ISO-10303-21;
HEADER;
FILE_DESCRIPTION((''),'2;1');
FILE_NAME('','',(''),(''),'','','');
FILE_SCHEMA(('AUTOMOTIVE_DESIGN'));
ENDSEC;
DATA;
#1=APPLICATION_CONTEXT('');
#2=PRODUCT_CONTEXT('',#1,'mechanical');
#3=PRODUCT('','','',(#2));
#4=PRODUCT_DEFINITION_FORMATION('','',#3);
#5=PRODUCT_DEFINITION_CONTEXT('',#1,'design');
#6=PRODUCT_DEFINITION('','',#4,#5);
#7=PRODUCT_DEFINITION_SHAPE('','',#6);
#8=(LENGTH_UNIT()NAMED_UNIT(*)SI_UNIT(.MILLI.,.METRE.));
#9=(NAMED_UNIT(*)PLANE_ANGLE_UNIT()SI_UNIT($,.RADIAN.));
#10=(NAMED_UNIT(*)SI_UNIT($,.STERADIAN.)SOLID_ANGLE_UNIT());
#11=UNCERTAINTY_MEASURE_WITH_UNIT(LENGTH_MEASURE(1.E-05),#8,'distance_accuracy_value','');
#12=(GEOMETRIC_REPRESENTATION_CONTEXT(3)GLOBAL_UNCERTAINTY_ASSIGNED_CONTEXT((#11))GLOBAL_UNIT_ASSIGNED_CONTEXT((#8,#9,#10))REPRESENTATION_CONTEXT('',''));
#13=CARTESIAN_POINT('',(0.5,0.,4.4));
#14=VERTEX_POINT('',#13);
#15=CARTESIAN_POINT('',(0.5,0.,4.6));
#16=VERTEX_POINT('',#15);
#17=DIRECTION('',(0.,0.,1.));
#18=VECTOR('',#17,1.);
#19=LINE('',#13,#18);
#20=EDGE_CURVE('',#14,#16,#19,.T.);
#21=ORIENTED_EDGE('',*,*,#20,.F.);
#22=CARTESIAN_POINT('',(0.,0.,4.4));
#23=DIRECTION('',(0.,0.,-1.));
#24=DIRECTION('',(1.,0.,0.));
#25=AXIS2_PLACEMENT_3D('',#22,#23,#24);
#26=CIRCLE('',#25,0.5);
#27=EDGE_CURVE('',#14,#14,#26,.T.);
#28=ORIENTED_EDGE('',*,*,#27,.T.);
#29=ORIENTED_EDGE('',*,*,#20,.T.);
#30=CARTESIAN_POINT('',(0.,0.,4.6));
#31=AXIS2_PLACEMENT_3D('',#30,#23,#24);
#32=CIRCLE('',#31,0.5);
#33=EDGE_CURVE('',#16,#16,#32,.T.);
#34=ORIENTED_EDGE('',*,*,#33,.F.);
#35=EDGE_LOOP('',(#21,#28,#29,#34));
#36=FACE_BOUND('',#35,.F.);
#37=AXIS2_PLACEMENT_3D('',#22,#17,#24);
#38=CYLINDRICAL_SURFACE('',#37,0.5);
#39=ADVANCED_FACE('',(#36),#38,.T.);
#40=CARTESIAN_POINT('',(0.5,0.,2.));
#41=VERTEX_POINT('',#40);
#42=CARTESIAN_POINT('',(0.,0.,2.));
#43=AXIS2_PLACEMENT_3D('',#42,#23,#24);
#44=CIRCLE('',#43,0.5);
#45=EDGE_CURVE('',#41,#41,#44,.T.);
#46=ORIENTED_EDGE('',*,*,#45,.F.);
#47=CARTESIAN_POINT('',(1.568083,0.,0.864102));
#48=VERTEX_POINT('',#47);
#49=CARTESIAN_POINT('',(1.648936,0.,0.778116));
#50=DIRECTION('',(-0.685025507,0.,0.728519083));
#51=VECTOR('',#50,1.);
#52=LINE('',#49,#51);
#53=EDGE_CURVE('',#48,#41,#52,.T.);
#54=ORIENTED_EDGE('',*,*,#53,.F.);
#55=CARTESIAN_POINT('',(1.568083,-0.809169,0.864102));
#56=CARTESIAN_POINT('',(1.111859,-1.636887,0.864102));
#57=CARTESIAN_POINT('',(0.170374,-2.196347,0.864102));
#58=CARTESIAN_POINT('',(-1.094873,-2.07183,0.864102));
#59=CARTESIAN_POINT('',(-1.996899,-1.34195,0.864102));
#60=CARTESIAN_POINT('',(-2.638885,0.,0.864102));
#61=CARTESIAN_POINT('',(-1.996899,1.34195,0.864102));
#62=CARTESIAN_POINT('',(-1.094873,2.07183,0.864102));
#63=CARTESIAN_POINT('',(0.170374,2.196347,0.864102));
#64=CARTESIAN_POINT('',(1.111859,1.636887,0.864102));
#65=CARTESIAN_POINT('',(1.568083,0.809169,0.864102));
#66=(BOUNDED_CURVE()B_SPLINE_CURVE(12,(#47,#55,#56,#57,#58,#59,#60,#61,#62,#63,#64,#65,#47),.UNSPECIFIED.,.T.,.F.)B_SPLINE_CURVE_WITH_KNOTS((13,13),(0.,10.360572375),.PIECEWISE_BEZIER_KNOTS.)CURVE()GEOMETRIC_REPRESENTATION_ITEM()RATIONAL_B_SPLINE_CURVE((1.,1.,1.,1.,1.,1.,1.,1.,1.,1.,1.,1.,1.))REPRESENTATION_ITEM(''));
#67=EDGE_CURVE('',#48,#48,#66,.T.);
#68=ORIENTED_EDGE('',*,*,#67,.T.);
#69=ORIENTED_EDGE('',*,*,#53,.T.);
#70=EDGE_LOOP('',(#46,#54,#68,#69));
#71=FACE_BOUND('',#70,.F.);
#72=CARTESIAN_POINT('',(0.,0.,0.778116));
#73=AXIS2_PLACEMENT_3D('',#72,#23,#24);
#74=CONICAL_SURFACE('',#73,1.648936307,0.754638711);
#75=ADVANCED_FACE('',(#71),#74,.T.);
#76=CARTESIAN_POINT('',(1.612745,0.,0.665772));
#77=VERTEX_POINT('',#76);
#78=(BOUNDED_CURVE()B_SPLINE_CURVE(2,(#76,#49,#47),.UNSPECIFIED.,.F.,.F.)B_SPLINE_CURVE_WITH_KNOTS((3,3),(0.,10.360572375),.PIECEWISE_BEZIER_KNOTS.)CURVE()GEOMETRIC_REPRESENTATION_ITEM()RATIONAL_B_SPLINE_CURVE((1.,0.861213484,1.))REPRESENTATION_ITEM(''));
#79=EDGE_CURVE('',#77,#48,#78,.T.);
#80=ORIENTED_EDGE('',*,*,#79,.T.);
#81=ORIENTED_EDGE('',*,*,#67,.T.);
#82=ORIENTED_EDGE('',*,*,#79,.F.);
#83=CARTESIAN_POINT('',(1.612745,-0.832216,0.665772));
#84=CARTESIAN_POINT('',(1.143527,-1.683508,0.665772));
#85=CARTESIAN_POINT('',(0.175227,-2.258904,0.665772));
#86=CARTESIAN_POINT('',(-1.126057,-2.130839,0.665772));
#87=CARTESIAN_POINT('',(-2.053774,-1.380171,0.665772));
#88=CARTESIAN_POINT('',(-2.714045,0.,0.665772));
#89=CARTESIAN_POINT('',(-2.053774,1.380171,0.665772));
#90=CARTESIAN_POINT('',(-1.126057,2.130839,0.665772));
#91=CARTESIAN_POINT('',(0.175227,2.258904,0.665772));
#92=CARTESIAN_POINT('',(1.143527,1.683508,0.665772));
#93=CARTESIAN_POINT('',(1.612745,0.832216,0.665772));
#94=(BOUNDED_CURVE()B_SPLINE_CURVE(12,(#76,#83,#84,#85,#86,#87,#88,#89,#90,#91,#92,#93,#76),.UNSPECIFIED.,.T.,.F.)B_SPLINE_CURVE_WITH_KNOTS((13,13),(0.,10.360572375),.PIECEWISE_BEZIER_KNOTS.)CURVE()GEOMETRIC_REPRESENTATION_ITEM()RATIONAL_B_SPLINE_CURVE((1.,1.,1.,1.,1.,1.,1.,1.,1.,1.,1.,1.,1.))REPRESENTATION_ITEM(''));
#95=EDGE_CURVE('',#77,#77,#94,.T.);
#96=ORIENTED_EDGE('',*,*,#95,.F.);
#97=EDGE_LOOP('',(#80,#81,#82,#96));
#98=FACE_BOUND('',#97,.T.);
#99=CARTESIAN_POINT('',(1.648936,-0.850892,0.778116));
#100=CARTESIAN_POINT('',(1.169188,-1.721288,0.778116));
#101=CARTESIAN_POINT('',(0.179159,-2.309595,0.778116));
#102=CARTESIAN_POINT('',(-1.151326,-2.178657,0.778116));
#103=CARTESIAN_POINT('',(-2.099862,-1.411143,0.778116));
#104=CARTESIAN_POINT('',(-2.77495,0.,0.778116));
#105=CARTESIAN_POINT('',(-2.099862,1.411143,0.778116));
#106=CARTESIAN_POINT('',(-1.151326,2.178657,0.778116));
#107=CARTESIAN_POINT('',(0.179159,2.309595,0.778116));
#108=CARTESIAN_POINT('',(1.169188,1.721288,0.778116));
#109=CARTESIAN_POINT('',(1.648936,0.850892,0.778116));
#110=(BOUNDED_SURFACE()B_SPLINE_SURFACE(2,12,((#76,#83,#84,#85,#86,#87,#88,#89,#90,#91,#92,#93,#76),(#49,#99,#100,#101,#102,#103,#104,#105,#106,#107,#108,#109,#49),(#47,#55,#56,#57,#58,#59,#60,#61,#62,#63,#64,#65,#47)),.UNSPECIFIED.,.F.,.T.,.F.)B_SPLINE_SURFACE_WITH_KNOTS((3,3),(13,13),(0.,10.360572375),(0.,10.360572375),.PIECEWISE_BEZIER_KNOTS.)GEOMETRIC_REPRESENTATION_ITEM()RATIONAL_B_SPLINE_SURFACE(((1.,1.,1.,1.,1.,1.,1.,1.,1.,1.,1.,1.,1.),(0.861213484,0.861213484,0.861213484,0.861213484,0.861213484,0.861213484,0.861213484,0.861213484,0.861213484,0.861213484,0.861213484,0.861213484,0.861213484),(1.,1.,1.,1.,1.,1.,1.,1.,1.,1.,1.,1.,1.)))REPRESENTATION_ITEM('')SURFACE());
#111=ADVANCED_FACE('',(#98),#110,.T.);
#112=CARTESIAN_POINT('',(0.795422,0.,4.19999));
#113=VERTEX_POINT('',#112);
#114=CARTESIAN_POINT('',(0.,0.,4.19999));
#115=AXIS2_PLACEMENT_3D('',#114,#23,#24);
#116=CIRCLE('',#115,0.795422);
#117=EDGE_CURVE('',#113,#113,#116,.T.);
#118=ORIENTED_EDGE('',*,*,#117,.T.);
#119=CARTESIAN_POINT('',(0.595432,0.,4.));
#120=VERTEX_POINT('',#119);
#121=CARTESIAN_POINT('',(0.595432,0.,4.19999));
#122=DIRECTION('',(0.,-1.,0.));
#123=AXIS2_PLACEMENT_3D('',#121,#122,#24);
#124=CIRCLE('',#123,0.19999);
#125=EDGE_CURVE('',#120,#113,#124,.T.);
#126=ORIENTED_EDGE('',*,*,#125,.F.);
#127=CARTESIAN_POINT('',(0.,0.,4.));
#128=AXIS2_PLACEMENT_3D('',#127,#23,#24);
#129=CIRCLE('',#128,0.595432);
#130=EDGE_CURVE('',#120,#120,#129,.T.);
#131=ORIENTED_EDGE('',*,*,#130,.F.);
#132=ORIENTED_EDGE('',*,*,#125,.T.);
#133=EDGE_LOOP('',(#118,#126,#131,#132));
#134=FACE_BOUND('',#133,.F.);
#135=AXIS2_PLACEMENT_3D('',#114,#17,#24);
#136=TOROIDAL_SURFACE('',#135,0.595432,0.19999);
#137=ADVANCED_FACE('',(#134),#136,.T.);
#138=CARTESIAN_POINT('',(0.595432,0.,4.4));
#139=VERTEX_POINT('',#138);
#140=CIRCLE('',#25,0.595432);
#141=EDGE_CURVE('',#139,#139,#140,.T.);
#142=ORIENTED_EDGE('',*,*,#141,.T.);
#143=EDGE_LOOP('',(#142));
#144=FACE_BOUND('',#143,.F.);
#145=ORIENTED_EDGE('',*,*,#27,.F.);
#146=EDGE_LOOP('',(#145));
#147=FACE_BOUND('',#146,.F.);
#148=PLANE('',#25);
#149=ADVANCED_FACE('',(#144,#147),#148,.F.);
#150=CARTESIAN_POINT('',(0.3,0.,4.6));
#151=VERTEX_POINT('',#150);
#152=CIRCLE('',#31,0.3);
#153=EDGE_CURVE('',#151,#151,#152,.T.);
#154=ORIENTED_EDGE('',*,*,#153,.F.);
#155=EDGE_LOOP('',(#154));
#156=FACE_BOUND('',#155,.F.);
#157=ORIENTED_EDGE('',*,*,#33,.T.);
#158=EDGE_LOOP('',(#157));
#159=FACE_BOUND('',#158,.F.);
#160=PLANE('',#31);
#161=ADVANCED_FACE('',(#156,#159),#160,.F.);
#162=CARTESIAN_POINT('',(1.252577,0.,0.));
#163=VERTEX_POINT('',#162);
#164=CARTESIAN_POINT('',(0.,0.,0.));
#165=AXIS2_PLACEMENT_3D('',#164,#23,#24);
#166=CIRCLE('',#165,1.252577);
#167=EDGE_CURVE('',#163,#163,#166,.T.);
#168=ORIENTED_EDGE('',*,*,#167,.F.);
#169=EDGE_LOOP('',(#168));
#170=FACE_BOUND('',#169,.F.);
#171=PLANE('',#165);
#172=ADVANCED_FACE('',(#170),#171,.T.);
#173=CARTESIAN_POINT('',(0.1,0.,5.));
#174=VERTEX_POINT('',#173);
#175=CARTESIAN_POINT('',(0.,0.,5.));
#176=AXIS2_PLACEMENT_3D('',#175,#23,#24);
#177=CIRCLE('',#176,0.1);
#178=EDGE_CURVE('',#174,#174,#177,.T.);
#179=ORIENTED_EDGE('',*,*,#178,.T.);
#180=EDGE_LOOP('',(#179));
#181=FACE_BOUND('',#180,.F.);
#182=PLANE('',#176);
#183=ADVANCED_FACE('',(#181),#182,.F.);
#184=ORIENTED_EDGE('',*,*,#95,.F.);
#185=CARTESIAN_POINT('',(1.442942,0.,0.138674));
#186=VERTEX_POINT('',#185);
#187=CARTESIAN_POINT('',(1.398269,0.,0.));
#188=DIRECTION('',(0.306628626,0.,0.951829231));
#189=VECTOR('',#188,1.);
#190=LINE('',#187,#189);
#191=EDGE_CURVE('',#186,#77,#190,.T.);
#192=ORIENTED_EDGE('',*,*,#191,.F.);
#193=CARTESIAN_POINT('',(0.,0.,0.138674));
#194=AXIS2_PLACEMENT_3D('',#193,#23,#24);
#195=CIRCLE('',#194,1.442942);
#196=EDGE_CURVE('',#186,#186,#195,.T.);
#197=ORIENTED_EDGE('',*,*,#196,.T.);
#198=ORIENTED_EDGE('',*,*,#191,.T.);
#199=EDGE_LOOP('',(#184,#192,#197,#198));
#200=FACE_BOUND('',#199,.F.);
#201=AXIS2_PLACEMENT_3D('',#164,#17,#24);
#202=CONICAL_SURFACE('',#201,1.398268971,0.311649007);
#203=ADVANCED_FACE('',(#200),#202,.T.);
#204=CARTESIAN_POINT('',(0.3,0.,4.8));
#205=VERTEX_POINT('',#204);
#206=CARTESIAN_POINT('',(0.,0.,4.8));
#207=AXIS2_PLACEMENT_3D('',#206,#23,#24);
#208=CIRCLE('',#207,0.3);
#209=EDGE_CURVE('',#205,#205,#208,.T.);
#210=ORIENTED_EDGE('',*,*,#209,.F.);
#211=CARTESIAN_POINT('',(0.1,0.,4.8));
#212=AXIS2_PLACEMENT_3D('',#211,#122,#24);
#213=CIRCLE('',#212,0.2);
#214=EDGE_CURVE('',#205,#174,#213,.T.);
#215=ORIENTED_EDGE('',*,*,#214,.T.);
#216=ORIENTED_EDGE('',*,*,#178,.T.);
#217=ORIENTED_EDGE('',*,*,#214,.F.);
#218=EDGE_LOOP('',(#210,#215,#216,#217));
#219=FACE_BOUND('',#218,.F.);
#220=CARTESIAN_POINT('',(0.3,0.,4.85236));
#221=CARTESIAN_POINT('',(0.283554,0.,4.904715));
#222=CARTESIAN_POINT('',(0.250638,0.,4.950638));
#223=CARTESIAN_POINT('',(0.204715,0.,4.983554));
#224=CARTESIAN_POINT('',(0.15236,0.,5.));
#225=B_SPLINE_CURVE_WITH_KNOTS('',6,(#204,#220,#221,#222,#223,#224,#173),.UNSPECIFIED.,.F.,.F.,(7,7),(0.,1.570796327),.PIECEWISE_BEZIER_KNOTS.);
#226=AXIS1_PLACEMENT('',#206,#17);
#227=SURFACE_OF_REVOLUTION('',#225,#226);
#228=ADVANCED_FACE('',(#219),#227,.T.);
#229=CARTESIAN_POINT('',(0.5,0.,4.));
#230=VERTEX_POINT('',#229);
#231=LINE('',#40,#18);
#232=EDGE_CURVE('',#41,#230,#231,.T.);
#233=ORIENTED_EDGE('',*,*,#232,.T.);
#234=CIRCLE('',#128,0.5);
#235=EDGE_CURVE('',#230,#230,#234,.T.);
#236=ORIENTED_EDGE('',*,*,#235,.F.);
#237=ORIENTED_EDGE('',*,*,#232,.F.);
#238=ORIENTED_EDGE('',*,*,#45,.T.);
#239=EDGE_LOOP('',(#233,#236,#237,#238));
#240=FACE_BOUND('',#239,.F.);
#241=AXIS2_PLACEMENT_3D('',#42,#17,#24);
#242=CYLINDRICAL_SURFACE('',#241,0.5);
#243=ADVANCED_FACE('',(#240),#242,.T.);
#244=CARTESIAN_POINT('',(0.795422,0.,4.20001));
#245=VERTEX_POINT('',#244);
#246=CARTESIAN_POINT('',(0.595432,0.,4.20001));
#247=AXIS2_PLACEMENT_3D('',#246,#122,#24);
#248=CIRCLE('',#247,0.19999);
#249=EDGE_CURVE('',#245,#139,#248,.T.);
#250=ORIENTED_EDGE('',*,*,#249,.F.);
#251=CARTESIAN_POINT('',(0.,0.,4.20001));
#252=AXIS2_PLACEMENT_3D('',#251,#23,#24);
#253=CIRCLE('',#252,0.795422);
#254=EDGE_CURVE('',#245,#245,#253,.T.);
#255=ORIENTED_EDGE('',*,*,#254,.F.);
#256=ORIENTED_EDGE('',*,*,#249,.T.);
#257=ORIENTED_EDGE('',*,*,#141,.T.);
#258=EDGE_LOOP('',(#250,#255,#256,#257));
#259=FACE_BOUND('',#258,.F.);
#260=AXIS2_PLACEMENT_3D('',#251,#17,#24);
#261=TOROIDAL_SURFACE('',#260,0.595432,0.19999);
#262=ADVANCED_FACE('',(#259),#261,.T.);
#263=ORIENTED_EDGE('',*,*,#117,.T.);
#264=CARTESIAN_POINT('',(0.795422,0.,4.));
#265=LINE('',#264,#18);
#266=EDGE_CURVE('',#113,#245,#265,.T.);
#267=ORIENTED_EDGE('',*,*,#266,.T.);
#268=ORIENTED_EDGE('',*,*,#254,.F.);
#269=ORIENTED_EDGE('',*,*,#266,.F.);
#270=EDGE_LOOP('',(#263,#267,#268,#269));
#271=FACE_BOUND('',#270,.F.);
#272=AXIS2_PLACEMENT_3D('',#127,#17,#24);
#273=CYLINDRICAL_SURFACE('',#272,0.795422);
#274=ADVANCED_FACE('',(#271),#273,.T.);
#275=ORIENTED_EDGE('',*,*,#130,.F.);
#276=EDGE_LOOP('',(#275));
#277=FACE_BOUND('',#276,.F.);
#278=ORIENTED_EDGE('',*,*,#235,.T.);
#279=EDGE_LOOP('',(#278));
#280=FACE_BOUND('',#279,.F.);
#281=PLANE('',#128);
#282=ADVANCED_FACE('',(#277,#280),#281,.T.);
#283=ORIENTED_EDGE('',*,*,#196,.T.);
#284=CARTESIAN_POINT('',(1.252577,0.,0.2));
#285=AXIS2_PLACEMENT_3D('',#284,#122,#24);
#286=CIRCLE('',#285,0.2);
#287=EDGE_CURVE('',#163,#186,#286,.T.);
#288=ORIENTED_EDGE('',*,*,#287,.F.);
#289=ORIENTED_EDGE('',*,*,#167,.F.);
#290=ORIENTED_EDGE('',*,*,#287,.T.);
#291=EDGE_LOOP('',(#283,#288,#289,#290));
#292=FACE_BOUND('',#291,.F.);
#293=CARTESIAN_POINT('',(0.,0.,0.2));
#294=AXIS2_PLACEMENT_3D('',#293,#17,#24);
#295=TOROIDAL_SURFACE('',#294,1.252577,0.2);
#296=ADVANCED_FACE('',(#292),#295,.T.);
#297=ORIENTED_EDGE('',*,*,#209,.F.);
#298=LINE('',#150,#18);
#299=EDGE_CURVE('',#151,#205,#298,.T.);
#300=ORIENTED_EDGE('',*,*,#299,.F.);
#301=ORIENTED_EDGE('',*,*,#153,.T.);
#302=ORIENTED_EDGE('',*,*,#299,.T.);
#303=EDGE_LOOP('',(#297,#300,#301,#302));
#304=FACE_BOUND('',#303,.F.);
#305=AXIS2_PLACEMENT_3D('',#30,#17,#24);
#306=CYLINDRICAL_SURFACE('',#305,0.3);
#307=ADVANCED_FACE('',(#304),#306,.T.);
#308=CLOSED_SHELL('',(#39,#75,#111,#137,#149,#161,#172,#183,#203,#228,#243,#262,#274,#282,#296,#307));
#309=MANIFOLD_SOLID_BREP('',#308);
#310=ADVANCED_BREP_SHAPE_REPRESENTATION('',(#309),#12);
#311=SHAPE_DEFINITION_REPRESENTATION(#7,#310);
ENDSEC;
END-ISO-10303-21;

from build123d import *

# Parameters (mm, degrees)
F2_R = 0.2
F3_R = 0.2
F4_R = 0.19999


# Not quite as in the source:
# - a fillet or chamfer is up to 0.001 mm smaller than in the source, because OpenCascade refuses the exact size


with BuildPart() as f1:
    # F0 (on Front) → F1 (revolve)
    with BuildSketch(Plane.XZ):
        Polygon((0, 5), (0, 0), (1.3982689707, 0), (1.6489363067, 0.7781155359), (0.5, 2), (0.5, 4), (0.7954219793, 4), (0.7954219793, 4.4), (0.5, 4.4), (0.5, 4.6), (0.3, 4.6), (0.3, 5), align=None)
    revolve(axis=Axis((0, 0, 2.5), (0, 0, -1)))

    # F2
    f2_edges = [f1.edges().sort_by_distance(p)[0] for p in [
        (-1.398269, 0, 0),
    ]]
    fillet(f2_edges, radius=F2_R)

    # F3
    f3_edges = [f1.edges().sort_by_distance(p)[0] for p in [
        (-1.648936, 0, 0.778116),
        (-0.3, 0, 5),
    ]]
    fillet(f3_edges, radius=F3_R)

    # F4 (radius 0.2 in the source; OpenCascade refuses exactly that, so slightly less here)
    f4_edges = [f1.edges().sort_by_distance(p)[0] for p in [
        (-0.795422, 0, 4.4),
        (-0.795422, 0, 4),
    ]]
    fillet(f4_edges, radius=F4_R)


solid = f1.part
